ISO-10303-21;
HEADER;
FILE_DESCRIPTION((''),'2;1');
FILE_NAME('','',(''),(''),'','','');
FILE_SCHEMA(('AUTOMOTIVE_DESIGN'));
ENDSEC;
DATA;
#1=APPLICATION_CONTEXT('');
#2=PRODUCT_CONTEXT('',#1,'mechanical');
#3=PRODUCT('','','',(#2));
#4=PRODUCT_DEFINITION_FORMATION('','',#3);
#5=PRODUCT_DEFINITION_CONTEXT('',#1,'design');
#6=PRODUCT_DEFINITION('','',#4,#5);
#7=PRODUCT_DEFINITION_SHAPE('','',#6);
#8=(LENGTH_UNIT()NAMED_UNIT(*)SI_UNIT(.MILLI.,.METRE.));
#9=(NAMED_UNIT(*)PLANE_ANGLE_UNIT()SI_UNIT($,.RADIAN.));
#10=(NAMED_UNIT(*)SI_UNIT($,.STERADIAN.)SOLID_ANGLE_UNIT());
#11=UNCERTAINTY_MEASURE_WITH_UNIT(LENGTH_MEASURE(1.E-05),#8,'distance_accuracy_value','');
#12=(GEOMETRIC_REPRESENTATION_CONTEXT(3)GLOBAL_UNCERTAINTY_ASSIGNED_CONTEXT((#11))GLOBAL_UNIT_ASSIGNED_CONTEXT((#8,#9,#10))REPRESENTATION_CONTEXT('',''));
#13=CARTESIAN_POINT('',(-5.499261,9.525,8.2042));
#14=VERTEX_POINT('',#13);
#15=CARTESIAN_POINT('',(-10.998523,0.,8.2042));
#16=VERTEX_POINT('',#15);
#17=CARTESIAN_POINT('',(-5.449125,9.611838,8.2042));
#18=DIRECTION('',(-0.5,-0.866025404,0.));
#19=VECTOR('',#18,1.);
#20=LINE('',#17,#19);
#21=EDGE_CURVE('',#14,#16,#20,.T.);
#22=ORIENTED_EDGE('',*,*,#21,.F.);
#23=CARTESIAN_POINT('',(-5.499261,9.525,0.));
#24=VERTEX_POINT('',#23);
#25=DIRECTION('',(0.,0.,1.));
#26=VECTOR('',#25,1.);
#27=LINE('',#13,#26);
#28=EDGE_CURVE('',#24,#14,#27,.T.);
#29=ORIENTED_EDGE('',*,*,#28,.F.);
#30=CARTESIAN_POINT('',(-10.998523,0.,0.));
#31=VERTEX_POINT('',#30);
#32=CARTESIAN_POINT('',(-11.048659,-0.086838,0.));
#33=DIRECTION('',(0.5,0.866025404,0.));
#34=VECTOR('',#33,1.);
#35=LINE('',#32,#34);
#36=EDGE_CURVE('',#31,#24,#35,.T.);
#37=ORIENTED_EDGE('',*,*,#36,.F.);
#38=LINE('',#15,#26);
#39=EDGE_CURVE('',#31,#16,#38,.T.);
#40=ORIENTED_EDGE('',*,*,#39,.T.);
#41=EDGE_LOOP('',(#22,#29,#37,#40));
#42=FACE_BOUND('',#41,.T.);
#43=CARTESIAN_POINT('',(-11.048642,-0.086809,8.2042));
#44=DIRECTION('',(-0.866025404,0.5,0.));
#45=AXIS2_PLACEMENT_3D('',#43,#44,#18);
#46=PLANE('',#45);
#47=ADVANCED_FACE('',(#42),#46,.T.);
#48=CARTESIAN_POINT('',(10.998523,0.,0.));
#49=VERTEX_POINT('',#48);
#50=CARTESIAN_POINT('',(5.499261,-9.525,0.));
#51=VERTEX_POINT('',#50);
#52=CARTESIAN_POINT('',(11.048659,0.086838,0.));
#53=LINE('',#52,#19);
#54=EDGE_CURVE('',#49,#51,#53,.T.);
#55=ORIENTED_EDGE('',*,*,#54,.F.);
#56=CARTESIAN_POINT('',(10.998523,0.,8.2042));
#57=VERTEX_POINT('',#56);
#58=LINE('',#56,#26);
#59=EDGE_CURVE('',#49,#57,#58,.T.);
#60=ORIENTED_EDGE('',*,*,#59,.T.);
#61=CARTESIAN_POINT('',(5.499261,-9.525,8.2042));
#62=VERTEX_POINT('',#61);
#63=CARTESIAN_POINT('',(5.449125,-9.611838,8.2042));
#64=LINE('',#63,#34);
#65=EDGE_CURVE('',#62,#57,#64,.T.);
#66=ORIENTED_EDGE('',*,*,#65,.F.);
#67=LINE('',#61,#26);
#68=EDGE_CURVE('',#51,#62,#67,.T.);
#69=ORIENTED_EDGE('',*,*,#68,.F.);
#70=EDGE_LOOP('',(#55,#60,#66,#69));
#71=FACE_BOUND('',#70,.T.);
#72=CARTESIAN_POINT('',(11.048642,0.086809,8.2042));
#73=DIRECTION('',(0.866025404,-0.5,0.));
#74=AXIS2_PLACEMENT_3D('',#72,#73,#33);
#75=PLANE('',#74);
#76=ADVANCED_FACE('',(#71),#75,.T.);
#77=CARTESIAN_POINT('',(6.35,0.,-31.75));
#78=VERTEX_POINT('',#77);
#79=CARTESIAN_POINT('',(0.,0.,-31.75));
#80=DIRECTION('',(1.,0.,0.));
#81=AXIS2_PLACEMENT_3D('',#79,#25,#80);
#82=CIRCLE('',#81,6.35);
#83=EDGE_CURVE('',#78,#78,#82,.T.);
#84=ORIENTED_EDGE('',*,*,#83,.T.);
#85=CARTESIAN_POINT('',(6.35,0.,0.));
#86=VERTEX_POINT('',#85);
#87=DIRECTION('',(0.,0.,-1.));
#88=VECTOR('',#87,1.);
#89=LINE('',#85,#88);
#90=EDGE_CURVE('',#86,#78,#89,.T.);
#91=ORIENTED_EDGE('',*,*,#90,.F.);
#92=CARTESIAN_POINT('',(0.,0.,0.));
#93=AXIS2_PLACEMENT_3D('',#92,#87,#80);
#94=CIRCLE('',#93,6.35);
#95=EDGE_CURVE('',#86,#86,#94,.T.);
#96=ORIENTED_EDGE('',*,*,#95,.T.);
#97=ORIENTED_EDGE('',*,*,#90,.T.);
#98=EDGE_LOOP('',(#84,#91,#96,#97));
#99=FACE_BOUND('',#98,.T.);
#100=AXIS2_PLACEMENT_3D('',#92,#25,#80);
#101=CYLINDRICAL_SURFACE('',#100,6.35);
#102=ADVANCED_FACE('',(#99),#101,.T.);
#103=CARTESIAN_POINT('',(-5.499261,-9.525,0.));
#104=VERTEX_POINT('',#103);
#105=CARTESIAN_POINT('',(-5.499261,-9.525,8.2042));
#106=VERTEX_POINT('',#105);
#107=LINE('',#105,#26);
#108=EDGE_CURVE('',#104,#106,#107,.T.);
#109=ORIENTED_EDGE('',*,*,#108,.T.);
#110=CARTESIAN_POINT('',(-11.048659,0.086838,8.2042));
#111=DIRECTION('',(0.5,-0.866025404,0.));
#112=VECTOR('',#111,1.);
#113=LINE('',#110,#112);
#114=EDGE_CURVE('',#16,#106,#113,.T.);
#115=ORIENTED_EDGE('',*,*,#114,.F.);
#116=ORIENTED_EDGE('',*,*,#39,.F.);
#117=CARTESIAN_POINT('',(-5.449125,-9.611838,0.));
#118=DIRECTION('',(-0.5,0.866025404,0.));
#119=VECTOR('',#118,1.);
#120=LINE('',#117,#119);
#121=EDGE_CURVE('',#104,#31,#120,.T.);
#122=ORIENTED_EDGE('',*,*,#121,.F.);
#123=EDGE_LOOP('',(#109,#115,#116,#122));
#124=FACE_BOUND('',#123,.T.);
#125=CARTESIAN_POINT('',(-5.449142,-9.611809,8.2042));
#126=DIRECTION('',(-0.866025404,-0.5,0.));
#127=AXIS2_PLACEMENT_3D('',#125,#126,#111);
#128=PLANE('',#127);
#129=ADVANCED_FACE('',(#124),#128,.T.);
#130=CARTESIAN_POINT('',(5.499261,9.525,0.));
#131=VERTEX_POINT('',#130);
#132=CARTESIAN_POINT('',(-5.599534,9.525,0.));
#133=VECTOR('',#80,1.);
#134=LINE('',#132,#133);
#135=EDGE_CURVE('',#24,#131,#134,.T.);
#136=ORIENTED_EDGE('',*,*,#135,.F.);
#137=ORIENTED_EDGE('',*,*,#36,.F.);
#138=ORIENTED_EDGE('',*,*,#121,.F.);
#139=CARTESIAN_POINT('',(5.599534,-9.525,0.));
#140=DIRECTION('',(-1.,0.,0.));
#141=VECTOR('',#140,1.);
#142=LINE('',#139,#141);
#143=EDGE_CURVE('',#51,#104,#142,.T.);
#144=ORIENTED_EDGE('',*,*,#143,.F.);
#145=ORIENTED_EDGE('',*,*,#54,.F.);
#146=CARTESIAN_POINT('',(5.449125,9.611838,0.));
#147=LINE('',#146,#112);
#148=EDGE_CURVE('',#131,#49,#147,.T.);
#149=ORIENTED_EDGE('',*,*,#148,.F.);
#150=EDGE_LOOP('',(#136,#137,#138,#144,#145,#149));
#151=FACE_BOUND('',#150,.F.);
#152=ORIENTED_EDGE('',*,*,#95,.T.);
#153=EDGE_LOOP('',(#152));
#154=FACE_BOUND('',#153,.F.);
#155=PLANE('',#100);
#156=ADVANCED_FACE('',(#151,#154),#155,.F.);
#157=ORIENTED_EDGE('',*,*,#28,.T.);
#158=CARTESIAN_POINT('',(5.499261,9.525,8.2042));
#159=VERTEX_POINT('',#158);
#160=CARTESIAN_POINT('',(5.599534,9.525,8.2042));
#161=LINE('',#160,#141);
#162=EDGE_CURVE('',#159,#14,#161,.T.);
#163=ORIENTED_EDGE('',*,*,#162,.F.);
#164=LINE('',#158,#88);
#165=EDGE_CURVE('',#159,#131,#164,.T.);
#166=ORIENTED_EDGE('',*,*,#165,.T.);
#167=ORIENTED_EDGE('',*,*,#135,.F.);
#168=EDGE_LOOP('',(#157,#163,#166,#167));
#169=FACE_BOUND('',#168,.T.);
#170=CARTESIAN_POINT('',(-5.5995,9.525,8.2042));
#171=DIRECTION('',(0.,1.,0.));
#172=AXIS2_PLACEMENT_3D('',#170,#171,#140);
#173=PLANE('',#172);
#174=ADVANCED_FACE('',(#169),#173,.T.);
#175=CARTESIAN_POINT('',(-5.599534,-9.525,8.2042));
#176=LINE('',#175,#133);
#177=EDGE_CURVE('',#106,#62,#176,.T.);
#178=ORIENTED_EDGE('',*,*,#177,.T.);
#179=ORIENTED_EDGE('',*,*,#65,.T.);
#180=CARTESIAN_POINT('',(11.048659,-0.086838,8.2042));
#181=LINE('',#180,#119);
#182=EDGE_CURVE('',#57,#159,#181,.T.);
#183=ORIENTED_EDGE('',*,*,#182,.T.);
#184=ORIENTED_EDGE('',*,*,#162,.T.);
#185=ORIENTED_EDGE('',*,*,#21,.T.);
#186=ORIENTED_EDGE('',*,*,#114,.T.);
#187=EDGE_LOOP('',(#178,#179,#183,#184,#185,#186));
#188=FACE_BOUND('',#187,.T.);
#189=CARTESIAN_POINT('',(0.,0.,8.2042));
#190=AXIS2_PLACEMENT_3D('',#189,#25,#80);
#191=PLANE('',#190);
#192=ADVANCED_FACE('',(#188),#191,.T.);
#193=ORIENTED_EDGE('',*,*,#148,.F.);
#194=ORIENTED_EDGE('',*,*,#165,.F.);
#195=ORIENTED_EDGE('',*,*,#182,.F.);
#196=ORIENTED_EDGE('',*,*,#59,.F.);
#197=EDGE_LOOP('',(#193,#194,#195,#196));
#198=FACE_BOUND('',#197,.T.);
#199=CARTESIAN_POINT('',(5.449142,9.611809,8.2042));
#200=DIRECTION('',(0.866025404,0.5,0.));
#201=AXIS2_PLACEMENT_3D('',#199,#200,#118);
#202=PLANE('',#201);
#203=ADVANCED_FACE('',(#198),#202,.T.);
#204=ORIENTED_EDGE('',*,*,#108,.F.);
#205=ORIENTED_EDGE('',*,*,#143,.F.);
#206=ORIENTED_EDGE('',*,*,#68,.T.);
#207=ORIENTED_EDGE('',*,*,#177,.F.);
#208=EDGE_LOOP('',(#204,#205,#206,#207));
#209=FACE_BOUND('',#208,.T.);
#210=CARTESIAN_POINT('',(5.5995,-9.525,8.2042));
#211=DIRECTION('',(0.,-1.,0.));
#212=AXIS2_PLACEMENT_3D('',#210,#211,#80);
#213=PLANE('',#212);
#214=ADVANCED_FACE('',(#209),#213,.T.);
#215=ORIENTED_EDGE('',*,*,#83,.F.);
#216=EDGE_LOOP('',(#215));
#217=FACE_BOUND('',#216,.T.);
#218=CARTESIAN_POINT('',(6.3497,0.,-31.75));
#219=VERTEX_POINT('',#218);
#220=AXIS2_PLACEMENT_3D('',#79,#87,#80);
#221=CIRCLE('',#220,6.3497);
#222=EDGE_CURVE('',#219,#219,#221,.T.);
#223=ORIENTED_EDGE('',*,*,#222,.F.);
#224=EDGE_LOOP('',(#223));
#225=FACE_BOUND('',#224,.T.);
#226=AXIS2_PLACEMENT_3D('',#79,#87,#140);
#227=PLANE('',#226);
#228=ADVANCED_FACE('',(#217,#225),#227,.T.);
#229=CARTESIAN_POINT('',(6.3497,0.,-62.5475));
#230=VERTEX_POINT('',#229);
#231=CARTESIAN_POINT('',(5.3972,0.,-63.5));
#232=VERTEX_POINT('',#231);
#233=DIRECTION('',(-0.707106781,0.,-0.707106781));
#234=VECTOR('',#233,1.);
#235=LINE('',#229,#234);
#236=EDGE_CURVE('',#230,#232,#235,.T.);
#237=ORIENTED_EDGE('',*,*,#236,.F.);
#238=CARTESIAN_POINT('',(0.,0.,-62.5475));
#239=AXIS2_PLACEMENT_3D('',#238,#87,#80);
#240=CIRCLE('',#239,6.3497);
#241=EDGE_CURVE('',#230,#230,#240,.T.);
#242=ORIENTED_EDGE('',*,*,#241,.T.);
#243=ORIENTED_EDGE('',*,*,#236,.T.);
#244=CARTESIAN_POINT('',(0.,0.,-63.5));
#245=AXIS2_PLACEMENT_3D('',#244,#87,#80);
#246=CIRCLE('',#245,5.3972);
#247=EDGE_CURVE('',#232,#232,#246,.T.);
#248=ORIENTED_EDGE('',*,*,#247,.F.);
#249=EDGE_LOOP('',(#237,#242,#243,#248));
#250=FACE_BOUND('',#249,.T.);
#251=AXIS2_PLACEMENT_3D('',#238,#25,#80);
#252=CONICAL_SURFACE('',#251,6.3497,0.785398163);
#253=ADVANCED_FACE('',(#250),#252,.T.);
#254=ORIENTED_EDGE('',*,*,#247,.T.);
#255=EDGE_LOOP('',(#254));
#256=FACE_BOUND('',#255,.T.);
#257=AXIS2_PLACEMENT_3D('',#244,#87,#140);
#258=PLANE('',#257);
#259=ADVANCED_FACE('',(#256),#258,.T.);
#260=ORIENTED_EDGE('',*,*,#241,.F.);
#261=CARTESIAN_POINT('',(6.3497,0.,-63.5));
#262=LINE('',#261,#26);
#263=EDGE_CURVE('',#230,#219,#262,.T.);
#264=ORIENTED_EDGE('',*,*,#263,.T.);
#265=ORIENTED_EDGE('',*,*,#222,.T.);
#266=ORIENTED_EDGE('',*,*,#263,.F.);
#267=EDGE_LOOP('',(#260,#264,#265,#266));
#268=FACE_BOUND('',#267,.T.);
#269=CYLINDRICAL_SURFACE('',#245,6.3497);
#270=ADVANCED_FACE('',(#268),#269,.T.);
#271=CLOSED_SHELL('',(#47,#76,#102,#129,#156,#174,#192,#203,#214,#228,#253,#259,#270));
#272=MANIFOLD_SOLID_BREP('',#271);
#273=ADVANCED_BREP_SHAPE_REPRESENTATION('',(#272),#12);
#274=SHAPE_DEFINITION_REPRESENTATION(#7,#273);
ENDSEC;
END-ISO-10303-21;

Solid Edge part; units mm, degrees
sketch "Sketch1" plane through (0, 0, 0) normal (0, 0, 1) x (1, 0, 0)
  circle A0 centre (0, 0) radius 11.049
  dimension "D1" = 22.098
extrude "Protrusion1" add sketch "Sketch1" along normal blind 8.2042
sketch "Sketch2" plane through (0, 0, 0) normal (0, 0, -1) x (1, 0, 0)
  circle A0 centre (0, 0) radius 6.35
extrude "Protrusion2" add sketch "Sketch2" along normal blind 63.5
sketch "Sketch3" plane through (0, 0, -63.5) normal (0, 0, -1) x (1, 0, 0)
  circle A0 centre (0, 0) radius 6.3497
extrude "Cutout1" cut sketch "Sketch3" against normal blind 31.75 flip side to cut
chamfer "Chamfer_1" distance 0.9525 angle 45 1 edges at (-6.3497, 0, -63.5)
sketch "Sketch4" plane through (0, 0, 8.2042) normal (0, 0, 1) x (1, 0, 0)
  line L0 (-5.5995, 9.525) -> (5.5995, 9.525)
  dimension "D1" = 19.05
extrude "Cutout2" cut sketch "Sketch4" against normal up to next material side at (0, 9.575, 8.2042)
pattern_circular "Pattern1" count 6 over 360 about axis through (0, 0, 8.2042) along (0, 0, 1) of "Cutout2"
properties part number "24103875"
